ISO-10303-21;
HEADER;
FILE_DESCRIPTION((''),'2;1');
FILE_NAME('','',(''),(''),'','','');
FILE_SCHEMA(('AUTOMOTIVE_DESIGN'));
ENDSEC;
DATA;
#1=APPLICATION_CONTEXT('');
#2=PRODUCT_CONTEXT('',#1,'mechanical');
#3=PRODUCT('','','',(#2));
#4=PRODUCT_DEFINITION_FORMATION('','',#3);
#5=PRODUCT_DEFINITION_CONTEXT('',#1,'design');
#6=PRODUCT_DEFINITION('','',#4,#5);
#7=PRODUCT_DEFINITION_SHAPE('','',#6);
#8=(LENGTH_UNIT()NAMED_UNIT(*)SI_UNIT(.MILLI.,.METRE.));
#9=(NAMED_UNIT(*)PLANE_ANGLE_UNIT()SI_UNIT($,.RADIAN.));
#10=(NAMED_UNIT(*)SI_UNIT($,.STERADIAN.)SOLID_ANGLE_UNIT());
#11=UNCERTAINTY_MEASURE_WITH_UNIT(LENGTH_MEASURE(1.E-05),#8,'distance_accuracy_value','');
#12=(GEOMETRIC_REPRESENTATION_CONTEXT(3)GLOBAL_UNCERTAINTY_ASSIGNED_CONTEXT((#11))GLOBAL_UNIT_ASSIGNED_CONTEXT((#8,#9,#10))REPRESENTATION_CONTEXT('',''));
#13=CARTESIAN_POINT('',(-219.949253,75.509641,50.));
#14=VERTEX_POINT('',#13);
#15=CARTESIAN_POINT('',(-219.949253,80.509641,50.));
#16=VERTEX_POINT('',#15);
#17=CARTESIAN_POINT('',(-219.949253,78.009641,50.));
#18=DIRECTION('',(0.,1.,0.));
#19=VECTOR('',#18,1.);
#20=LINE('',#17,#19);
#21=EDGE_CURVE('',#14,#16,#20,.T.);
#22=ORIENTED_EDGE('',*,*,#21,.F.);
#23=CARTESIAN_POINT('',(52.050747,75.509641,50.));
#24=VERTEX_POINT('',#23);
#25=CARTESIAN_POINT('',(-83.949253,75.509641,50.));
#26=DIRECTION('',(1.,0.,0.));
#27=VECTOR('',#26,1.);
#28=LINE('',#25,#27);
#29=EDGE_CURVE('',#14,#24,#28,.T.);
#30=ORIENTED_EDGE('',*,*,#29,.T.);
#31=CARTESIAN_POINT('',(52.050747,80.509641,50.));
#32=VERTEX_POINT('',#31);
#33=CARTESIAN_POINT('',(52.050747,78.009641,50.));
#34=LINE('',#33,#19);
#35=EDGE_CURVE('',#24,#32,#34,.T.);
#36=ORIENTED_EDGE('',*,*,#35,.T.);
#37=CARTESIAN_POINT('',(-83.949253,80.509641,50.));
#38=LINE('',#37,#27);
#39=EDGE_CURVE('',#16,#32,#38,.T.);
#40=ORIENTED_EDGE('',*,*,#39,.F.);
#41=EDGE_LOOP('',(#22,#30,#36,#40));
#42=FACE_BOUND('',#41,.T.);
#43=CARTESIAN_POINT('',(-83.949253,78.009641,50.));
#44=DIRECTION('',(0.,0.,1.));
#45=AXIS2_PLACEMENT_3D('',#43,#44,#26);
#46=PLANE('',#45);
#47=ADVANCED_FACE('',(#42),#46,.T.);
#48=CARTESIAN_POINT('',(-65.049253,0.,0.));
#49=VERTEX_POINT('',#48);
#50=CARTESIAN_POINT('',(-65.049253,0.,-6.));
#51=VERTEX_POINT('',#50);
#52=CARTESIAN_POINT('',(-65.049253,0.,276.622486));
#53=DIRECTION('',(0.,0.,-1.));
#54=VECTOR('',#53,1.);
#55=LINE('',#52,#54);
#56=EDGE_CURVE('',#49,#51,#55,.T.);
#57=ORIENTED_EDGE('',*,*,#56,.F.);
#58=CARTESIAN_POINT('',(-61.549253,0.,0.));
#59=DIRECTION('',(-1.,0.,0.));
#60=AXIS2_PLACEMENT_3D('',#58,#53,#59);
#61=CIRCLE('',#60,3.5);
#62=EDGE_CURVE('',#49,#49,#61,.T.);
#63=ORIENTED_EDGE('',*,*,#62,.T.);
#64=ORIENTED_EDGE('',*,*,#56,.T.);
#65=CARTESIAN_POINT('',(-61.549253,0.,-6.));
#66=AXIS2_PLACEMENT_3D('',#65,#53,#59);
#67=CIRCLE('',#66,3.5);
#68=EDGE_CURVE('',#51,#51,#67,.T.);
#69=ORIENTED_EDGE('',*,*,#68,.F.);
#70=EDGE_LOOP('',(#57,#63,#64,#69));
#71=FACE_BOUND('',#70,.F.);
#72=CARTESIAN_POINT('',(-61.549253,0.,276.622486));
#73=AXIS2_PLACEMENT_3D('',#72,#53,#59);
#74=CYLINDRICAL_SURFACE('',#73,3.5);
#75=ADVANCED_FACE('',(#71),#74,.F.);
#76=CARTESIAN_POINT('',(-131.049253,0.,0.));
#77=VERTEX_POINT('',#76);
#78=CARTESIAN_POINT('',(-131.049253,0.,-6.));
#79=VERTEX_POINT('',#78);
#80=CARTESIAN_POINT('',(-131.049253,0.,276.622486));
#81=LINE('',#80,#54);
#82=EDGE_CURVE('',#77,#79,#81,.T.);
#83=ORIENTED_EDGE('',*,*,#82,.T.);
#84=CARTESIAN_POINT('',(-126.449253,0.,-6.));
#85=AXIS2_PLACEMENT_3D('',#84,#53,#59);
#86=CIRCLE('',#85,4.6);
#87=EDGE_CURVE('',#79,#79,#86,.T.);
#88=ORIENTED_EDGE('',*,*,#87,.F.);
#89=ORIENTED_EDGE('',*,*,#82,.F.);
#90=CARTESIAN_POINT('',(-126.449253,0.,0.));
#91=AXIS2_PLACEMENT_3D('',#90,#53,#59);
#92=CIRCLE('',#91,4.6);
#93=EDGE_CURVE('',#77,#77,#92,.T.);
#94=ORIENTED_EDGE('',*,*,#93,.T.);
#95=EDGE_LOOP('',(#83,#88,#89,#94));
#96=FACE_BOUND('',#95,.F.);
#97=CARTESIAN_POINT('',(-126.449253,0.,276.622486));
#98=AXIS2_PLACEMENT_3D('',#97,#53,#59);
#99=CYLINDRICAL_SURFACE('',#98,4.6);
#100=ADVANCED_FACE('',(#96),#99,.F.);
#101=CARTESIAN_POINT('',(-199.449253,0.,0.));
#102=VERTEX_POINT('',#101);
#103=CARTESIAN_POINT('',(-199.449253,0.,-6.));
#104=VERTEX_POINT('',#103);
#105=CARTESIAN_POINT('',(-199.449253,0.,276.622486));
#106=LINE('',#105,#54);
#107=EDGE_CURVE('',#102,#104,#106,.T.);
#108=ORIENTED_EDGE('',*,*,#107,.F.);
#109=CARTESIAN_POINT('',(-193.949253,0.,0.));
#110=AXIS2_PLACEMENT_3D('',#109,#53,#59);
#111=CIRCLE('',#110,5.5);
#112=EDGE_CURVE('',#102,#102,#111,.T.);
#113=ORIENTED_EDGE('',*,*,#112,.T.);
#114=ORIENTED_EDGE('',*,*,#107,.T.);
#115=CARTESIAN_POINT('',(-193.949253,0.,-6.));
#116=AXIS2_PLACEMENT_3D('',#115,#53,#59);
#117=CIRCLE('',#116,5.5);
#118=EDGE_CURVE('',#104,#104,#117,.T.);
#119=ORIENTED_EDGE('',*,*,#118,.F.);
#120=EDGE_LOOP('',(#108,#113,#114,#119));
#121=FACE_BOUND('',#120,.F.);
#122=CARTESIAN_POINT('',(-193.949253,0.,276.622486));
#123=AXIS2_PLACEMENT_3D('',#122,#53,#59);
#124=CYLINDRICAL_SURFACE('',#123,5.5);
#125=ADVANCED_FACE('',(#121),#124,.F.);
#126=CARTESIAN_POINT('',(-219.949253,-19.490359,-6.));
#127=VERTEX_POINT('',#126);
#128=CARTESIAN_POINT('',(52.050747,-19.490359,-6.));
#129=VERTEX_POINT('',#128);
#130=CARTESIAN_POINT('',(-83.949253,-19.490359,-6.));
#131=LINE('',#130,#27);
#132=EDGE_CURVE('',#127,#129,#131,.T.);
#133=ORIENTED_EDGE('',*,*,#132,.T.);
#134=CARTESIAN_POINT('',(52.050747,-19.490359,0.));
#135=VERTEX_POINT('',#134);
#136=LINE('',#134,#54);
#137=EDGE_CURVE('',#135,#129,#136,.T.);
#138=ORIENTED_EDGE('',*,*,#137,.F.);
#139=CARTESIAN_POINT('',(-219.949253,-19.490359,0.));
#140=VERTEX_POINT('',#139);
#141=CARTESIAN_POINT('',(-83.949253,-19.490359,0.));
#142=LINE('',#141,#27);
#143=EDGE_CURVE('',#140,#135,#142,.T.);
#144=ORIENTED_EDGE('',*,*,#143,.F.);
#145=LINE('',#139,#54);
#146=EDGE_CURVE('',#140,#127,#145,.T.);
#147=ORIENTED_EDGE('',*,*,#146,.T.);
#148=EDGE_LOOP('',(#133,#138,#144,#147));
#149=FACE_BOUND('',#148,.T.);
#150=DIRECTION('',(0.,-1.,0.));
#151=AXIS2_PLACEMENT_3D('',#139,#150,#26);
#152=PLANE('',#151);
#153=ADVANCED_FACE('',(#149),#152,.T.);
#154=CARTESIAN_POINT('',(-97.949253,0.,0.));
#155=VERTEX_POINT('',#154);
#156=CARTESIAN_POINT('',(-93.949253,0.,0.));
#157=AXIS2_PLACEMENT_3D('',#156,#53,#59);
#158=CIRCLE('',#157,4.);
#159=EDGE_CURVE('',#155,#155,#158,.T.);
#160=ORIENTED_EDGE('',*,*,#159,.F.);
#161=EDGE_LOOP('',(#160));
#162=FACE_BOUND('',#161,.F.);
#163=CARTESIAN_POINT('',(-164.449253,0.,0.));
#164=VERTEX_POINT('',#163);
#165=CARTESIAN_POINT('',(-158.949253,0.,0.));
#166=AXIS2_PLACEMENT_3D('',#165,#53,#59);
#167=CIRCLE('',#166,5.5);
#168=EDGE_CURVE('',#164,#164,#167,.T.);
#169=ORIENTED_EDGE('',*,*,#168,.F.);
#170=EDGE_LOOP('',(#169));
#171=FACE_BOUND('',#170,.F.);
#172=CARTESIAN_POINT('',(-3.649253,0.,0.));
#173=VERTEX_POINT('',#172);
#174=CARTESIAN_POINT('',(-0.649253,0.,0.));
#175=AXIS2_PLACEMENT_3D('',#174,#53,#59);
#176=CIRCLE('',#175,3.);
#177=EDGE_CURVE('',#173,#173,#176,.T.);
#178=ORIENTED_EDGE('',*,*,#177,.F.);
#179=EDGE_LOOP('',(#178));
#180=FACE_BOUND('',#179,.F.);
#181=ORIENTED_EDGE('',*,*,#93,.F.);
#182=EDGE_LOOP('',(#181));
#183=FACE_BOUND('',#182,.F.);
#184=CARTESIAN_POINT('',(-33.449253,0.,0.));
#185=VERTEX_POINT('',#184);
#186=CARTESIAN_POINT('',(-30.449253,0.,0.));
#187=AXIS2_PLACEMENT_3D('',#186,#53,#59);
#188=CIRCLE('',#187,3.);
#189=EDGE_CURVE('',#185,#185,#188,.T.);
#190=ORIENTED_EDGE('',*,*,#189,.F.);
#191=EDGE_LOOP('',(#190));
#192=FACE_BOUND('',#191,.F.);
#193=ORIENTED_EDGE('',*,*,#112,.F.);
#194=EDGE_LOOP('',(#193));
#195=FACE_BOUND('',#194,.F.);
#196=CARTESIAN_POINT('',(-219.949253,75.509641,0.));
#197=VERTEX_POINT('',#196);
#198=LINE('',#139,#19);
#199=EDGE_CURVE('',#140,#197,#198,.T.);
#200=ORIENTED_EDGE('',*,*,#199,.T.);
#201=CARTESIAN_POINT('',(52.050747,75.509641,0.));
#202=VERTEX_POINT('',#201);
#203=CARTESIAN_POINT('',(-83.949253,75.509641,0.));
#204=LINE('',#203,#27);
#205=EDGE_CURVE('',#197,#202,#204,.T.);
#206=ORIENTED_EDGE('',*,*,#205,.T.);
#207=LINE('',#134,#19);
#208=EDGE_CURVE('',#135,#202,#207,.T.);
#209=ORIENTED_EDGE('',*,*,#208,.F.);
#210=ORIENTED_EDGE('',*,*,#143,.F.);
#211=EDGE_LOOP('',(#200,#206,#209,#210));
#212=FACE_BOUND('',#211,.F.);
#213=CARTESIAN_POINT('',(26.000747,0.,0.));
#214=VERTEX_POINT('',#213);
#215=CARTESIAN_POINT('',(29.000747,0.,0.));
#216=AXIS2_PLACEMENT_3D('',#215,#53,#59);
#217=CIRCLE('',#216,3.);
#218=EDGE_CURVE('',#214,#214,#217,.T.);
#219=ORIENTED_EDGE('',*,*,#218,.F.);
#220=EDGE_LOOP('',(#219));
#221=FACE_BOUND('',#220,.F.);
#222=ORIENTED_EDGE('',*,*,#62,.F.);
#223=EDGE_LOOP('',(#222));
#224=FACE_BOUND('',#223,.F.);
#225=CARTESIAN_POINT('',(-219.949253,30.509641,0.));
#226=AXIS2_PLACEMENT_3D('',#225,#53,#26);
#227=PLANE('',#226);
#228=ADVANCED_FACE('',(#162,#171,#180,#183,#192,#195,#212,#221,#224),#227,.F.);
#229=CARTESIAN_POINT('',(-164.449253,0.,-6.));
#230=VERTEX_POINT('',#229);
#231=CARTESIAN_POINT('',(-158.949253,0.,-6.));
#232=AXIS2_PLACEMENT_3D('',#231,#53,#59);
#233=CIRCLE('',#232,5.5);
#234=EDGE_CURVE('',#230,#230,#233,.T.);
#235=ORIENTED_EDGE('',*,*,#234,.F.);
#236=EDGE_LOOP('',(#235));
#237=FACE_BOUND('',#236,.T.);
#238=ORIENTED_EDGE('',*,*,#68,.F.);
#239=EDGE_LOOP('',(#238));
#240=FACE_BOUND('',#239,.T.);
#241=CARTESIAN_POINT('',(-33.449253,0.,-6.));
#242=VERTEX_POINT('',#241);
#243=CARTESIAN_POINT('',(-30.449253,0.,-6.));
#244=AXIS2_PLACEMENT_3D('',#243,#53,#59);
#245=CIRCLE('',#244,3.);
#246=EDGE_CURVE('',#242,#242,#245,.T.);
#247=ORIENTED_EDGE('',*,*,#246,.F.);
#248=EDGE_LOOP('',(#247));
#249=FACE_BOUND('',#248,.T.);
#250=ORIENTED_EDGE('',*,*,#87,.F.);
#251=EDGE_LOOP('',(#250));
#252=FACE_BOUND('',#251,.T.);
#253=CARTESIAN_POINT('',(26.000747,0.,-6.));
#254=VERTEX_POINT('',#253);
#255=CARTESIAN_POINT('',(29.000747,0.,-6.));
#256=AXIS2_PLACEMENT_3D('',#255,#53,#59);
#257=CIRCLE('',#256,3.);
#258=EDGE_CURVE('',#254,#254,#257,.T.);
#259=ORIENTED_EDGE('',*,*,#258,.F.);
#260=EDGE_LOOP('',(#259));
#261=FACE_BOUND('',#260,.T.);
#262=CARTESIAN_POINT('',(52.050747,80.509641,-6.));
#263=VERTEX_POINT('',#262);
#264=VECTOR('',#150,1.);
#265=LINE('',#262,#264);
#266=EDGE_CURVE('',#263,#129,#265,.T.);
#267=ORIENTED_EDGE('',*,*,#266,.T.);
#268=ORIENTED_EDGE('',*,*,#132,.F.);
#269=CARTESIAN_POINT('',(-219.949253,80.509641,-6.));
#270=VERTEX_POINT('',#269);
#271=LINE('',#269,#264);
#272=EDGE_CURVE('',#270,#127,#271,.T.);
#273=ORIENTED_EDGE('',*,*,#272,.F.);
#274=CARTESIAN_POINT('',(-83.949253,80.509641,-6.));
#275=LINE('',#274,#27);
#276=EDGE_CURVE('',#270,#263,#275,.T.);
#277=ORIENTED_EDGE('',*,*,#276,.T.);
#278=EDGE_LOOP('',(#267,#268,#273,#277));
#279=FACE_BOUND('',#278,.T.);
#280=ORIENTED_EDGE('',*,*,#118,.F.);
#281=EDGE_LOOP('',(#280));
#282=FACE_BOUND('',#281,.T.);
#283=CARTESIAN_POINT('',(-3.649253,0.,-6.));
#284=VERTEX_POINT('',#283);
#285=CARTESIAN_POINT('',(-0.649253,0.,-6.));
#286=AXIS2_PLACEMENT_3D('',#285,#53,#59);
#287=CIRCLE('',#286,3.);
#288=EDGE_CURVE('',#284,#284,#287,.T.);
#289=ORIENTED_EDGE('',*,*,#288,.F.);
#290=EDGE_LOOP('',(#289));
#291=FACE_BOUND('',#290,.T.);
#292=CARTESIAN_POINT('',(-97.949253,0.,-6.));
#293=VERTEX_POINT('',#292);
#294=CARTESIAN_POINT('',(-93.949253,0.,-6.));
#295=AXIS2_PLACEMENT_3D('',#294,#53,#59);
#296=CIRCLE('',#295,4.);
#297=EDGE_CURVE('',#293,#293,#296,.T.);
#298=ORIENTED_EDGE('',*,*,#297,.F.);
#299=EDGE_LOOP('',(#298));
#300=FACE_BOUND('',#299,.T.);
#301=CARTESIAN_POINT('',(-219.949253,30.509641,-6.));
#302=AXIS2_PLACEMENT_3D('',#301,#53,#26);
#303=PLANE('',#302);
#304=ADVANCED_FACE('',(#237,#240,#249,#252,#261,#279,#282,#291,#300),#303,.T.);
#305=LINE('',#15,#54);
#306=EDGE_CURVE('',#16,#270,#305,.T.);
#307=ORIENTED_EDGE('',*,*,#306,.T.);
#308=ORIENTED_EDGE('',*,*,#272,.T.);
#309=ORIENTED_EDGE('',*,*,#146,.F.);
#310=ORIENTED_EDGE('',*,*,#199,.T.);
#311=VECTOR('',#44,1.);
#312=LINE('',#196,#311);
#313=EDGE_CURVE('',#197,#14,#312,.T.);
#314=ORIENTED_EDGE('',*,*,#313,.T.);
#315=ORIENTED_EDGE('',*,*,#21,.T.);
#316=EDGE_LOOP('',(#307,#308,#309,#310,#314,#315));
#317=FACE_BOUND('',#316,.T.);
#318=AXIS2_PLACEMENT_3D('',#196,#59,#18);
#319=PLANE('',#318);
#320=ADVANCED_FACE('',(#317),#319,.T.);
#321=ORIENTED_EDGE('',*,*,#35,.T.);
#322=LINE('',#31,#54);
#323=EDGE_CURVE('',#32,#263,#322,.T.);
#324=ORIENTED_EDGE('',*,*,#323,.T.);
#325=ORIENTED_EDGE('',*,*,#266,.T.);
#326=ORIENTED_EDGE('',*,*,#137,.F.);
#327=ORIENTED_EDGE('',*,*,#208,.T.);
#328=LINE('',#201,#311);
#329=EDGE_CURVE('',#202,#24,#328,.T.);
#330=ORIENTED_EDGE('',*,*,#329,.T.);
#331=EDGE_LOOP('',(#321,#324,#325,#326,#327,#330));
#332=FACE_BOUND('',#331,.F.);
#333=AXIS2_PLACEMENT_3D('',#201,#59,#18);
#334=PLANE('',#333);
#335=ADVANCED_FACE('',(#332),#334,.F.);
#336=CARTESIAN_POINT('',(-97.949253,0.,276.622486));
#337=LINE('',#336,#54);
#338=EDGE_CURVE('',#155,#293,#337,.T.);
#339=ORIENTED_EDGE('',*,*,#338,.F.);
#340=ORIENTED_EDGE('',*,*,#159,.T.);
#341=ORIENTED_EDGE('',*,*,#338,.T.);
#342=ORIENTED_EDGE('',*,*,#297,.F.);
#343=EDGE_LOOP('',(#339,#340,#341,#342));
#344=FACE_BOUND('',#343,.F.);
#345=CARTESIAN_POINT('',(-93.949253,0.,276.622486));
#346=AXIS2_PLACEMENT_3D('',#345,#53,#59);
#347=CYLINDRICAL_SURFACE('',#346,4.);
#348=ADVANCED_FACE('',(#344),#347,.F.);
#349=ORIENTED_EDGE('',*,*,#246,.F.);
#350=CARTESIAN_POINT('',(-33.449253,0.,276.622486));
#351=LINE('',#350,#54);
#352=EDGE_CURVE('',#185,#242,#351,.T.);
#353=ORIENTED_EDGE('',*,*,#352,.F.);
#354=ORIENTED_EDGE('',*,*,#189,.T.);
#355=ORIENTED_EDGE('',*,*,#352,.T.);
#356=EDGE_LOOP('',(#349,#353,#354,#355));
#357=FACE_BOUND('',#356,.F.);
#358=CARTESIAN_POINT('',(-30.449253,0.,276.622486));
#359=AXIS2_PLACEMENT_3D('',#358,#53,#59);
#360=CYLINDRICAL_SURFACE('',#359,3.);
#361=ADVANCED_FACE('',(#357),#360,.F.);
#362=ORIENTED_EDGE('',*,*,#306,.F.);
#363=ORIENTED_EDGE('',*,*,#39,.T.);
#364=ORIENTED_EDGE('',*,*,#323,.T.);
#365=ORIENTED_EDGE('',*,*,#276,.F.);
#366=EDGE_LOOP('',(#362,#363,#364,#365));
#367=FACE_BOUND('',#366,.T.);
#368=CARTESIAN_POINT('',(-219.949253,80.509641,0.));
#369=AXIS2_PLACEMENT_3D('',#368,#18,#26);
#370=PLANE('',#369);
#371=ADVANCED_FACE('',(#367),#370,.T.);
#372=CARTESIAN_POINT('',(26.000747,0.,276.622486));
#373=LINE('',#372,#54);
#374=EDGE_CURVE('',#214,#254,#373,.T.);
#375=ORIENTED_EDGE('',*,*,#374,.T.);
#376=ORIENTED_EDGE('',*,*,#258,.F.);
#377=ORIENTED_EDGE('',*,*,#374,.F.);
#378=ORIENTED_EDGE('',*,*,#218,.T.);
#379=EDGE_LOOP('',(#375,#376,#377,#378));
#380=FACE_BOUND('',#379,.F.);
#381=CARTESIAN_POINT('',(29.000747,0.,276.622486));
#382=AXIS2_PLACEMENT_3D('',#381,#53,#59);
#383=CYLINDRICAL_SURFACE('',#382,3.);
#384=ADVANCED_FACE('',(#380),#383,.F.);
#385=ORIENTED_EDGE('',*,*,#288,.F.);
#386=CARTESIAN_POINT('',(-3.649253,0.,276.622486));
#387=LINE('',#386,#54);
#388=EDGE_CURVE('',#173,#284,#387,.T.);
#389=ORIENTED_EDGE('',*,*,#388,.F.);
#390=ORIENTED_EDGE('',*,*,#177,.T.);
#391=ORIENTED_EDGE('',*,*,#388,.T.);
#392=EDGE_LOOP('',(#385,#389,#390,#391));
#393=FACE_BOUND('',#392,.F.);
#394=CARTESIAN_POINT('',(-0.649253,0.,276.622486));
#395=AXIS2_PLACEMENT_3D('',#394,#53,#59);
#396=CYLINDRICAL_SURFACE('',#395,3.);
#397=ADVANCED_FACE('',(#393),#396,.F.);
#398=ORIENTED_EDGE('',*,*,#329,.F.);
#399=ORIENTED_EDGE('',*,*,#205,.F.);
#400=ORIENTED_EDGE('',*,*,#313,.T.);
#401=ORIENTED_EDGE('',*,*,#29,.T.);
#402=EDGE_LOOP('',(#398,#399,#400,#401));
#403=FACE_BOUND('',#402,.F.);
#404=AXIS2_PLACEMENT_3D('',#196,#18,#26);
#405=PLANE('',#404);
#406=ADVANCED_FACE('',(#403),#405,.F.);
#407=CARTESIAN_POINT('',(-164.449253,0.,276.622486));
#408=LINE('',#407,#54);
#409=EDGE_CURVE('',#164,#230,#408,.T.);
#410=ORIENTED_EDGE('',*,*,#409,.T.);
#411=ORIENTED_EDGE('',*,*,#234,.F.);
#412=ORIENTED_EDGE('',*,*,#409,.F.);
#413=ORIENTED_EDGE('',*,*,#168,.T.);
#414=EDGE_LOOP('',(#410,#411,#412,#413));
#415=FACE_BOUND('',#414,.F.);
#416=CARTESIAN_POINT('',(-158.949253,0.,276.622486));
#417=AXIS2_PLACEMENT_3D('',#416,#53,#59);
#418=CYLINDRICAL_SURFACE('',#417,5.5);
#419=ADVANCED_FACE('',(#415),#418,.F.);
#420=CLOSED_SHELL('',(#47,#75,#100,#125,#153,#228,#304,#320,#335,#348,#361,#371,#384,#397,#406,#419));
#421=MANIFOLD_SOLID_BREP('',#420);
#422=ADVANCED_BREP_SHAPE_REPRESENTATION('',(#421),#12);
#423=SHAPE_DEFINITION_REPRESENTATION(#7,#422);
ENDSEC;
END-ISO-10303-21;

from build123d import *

# Parameters (mm, degrees)
F0_W      = 272
F0_H      = 19.490359351
F0_H_2    = 30.509640649
F1_DEPTH  = 6
F2_D      = 11
F3_D      = 11
F4_D      = 9.2
F5_D      = 8
F6_D      = 7
F7_D      = 6
F8_D      = 6
F9_D      = 6
F10_DEPTH = 50
F11_W     = 272
F11_H     = 5
F12_DEPTH = 50


with BuildPart() as f1:
    # F0 (on Top) → F1 (new body)
    with BuildSketch(Plane.XY):
        with Locations((-83.9492530227, -9.7451796755)):
            Rectangle(F0_W, F0_H)
        with Locations((-83.9492530227, 15.2548203245)):
            Rectangle(F0_W, F0_H_2)
    extrude(amount=-F1_DEPTH)

    # F2 (through all)
    with Locations(Plane.XY):
        with Locations((-193.9492530227, 0)):
            Hole(F2_D / 2)

    # F3 (through all)
    with Locations(Plane.XY):
        with Locations((-158.9492530227, 0)):
            Hole(F3_D / 2)

    # F4 (through all)
    with Locations(Plane.XY):
        with Locations((-126.4492530227, 0)):
            Hole(F4_D / 2)

    # F5 (through all)
    with Locations(Plane.XY):
        with Locations((-93.9492530227, 0)):
            Hole(F5_D / 2)

    # F6 (through all)
    with Locations(Plane.XY):
        with Locations((-61.5492530227, 0)):
            Hole(F6_D / 2)

    # F7 (through all)
    with Locations(Plane.XY):
        with Locations((-30.4492530227, 0)):
            Hole(F7_D / 2)

    # F8 (through all)
    with Locations(Plane.XY):
        with Locations((29.0007469773, 0)):
            Hole(F8_D / 2)

    # F9 (through all)
    with Locations(Plane.XY):
        with Locations((-0.6492530227, 0)):
            Hole(F9_D / 2)

    # F10 (add): a face of the model
    f10_faces = [f1.faces().sort_by_distance(p)[0] for p in [
        (-83.9492530227, 30.509640649, -3),
    ]]
    extrude(f10_faces, amount=F10_DEPTH)

    # F11 (on face) → F12 (join)
    with BuildSketch(Plane.XY):
        with Locations((-83.9492530227, 78.009640649)):
            Rectangle(F11_W, F11_H)
    extrude(amount=F12_DEPTH)


solid = f1.part
